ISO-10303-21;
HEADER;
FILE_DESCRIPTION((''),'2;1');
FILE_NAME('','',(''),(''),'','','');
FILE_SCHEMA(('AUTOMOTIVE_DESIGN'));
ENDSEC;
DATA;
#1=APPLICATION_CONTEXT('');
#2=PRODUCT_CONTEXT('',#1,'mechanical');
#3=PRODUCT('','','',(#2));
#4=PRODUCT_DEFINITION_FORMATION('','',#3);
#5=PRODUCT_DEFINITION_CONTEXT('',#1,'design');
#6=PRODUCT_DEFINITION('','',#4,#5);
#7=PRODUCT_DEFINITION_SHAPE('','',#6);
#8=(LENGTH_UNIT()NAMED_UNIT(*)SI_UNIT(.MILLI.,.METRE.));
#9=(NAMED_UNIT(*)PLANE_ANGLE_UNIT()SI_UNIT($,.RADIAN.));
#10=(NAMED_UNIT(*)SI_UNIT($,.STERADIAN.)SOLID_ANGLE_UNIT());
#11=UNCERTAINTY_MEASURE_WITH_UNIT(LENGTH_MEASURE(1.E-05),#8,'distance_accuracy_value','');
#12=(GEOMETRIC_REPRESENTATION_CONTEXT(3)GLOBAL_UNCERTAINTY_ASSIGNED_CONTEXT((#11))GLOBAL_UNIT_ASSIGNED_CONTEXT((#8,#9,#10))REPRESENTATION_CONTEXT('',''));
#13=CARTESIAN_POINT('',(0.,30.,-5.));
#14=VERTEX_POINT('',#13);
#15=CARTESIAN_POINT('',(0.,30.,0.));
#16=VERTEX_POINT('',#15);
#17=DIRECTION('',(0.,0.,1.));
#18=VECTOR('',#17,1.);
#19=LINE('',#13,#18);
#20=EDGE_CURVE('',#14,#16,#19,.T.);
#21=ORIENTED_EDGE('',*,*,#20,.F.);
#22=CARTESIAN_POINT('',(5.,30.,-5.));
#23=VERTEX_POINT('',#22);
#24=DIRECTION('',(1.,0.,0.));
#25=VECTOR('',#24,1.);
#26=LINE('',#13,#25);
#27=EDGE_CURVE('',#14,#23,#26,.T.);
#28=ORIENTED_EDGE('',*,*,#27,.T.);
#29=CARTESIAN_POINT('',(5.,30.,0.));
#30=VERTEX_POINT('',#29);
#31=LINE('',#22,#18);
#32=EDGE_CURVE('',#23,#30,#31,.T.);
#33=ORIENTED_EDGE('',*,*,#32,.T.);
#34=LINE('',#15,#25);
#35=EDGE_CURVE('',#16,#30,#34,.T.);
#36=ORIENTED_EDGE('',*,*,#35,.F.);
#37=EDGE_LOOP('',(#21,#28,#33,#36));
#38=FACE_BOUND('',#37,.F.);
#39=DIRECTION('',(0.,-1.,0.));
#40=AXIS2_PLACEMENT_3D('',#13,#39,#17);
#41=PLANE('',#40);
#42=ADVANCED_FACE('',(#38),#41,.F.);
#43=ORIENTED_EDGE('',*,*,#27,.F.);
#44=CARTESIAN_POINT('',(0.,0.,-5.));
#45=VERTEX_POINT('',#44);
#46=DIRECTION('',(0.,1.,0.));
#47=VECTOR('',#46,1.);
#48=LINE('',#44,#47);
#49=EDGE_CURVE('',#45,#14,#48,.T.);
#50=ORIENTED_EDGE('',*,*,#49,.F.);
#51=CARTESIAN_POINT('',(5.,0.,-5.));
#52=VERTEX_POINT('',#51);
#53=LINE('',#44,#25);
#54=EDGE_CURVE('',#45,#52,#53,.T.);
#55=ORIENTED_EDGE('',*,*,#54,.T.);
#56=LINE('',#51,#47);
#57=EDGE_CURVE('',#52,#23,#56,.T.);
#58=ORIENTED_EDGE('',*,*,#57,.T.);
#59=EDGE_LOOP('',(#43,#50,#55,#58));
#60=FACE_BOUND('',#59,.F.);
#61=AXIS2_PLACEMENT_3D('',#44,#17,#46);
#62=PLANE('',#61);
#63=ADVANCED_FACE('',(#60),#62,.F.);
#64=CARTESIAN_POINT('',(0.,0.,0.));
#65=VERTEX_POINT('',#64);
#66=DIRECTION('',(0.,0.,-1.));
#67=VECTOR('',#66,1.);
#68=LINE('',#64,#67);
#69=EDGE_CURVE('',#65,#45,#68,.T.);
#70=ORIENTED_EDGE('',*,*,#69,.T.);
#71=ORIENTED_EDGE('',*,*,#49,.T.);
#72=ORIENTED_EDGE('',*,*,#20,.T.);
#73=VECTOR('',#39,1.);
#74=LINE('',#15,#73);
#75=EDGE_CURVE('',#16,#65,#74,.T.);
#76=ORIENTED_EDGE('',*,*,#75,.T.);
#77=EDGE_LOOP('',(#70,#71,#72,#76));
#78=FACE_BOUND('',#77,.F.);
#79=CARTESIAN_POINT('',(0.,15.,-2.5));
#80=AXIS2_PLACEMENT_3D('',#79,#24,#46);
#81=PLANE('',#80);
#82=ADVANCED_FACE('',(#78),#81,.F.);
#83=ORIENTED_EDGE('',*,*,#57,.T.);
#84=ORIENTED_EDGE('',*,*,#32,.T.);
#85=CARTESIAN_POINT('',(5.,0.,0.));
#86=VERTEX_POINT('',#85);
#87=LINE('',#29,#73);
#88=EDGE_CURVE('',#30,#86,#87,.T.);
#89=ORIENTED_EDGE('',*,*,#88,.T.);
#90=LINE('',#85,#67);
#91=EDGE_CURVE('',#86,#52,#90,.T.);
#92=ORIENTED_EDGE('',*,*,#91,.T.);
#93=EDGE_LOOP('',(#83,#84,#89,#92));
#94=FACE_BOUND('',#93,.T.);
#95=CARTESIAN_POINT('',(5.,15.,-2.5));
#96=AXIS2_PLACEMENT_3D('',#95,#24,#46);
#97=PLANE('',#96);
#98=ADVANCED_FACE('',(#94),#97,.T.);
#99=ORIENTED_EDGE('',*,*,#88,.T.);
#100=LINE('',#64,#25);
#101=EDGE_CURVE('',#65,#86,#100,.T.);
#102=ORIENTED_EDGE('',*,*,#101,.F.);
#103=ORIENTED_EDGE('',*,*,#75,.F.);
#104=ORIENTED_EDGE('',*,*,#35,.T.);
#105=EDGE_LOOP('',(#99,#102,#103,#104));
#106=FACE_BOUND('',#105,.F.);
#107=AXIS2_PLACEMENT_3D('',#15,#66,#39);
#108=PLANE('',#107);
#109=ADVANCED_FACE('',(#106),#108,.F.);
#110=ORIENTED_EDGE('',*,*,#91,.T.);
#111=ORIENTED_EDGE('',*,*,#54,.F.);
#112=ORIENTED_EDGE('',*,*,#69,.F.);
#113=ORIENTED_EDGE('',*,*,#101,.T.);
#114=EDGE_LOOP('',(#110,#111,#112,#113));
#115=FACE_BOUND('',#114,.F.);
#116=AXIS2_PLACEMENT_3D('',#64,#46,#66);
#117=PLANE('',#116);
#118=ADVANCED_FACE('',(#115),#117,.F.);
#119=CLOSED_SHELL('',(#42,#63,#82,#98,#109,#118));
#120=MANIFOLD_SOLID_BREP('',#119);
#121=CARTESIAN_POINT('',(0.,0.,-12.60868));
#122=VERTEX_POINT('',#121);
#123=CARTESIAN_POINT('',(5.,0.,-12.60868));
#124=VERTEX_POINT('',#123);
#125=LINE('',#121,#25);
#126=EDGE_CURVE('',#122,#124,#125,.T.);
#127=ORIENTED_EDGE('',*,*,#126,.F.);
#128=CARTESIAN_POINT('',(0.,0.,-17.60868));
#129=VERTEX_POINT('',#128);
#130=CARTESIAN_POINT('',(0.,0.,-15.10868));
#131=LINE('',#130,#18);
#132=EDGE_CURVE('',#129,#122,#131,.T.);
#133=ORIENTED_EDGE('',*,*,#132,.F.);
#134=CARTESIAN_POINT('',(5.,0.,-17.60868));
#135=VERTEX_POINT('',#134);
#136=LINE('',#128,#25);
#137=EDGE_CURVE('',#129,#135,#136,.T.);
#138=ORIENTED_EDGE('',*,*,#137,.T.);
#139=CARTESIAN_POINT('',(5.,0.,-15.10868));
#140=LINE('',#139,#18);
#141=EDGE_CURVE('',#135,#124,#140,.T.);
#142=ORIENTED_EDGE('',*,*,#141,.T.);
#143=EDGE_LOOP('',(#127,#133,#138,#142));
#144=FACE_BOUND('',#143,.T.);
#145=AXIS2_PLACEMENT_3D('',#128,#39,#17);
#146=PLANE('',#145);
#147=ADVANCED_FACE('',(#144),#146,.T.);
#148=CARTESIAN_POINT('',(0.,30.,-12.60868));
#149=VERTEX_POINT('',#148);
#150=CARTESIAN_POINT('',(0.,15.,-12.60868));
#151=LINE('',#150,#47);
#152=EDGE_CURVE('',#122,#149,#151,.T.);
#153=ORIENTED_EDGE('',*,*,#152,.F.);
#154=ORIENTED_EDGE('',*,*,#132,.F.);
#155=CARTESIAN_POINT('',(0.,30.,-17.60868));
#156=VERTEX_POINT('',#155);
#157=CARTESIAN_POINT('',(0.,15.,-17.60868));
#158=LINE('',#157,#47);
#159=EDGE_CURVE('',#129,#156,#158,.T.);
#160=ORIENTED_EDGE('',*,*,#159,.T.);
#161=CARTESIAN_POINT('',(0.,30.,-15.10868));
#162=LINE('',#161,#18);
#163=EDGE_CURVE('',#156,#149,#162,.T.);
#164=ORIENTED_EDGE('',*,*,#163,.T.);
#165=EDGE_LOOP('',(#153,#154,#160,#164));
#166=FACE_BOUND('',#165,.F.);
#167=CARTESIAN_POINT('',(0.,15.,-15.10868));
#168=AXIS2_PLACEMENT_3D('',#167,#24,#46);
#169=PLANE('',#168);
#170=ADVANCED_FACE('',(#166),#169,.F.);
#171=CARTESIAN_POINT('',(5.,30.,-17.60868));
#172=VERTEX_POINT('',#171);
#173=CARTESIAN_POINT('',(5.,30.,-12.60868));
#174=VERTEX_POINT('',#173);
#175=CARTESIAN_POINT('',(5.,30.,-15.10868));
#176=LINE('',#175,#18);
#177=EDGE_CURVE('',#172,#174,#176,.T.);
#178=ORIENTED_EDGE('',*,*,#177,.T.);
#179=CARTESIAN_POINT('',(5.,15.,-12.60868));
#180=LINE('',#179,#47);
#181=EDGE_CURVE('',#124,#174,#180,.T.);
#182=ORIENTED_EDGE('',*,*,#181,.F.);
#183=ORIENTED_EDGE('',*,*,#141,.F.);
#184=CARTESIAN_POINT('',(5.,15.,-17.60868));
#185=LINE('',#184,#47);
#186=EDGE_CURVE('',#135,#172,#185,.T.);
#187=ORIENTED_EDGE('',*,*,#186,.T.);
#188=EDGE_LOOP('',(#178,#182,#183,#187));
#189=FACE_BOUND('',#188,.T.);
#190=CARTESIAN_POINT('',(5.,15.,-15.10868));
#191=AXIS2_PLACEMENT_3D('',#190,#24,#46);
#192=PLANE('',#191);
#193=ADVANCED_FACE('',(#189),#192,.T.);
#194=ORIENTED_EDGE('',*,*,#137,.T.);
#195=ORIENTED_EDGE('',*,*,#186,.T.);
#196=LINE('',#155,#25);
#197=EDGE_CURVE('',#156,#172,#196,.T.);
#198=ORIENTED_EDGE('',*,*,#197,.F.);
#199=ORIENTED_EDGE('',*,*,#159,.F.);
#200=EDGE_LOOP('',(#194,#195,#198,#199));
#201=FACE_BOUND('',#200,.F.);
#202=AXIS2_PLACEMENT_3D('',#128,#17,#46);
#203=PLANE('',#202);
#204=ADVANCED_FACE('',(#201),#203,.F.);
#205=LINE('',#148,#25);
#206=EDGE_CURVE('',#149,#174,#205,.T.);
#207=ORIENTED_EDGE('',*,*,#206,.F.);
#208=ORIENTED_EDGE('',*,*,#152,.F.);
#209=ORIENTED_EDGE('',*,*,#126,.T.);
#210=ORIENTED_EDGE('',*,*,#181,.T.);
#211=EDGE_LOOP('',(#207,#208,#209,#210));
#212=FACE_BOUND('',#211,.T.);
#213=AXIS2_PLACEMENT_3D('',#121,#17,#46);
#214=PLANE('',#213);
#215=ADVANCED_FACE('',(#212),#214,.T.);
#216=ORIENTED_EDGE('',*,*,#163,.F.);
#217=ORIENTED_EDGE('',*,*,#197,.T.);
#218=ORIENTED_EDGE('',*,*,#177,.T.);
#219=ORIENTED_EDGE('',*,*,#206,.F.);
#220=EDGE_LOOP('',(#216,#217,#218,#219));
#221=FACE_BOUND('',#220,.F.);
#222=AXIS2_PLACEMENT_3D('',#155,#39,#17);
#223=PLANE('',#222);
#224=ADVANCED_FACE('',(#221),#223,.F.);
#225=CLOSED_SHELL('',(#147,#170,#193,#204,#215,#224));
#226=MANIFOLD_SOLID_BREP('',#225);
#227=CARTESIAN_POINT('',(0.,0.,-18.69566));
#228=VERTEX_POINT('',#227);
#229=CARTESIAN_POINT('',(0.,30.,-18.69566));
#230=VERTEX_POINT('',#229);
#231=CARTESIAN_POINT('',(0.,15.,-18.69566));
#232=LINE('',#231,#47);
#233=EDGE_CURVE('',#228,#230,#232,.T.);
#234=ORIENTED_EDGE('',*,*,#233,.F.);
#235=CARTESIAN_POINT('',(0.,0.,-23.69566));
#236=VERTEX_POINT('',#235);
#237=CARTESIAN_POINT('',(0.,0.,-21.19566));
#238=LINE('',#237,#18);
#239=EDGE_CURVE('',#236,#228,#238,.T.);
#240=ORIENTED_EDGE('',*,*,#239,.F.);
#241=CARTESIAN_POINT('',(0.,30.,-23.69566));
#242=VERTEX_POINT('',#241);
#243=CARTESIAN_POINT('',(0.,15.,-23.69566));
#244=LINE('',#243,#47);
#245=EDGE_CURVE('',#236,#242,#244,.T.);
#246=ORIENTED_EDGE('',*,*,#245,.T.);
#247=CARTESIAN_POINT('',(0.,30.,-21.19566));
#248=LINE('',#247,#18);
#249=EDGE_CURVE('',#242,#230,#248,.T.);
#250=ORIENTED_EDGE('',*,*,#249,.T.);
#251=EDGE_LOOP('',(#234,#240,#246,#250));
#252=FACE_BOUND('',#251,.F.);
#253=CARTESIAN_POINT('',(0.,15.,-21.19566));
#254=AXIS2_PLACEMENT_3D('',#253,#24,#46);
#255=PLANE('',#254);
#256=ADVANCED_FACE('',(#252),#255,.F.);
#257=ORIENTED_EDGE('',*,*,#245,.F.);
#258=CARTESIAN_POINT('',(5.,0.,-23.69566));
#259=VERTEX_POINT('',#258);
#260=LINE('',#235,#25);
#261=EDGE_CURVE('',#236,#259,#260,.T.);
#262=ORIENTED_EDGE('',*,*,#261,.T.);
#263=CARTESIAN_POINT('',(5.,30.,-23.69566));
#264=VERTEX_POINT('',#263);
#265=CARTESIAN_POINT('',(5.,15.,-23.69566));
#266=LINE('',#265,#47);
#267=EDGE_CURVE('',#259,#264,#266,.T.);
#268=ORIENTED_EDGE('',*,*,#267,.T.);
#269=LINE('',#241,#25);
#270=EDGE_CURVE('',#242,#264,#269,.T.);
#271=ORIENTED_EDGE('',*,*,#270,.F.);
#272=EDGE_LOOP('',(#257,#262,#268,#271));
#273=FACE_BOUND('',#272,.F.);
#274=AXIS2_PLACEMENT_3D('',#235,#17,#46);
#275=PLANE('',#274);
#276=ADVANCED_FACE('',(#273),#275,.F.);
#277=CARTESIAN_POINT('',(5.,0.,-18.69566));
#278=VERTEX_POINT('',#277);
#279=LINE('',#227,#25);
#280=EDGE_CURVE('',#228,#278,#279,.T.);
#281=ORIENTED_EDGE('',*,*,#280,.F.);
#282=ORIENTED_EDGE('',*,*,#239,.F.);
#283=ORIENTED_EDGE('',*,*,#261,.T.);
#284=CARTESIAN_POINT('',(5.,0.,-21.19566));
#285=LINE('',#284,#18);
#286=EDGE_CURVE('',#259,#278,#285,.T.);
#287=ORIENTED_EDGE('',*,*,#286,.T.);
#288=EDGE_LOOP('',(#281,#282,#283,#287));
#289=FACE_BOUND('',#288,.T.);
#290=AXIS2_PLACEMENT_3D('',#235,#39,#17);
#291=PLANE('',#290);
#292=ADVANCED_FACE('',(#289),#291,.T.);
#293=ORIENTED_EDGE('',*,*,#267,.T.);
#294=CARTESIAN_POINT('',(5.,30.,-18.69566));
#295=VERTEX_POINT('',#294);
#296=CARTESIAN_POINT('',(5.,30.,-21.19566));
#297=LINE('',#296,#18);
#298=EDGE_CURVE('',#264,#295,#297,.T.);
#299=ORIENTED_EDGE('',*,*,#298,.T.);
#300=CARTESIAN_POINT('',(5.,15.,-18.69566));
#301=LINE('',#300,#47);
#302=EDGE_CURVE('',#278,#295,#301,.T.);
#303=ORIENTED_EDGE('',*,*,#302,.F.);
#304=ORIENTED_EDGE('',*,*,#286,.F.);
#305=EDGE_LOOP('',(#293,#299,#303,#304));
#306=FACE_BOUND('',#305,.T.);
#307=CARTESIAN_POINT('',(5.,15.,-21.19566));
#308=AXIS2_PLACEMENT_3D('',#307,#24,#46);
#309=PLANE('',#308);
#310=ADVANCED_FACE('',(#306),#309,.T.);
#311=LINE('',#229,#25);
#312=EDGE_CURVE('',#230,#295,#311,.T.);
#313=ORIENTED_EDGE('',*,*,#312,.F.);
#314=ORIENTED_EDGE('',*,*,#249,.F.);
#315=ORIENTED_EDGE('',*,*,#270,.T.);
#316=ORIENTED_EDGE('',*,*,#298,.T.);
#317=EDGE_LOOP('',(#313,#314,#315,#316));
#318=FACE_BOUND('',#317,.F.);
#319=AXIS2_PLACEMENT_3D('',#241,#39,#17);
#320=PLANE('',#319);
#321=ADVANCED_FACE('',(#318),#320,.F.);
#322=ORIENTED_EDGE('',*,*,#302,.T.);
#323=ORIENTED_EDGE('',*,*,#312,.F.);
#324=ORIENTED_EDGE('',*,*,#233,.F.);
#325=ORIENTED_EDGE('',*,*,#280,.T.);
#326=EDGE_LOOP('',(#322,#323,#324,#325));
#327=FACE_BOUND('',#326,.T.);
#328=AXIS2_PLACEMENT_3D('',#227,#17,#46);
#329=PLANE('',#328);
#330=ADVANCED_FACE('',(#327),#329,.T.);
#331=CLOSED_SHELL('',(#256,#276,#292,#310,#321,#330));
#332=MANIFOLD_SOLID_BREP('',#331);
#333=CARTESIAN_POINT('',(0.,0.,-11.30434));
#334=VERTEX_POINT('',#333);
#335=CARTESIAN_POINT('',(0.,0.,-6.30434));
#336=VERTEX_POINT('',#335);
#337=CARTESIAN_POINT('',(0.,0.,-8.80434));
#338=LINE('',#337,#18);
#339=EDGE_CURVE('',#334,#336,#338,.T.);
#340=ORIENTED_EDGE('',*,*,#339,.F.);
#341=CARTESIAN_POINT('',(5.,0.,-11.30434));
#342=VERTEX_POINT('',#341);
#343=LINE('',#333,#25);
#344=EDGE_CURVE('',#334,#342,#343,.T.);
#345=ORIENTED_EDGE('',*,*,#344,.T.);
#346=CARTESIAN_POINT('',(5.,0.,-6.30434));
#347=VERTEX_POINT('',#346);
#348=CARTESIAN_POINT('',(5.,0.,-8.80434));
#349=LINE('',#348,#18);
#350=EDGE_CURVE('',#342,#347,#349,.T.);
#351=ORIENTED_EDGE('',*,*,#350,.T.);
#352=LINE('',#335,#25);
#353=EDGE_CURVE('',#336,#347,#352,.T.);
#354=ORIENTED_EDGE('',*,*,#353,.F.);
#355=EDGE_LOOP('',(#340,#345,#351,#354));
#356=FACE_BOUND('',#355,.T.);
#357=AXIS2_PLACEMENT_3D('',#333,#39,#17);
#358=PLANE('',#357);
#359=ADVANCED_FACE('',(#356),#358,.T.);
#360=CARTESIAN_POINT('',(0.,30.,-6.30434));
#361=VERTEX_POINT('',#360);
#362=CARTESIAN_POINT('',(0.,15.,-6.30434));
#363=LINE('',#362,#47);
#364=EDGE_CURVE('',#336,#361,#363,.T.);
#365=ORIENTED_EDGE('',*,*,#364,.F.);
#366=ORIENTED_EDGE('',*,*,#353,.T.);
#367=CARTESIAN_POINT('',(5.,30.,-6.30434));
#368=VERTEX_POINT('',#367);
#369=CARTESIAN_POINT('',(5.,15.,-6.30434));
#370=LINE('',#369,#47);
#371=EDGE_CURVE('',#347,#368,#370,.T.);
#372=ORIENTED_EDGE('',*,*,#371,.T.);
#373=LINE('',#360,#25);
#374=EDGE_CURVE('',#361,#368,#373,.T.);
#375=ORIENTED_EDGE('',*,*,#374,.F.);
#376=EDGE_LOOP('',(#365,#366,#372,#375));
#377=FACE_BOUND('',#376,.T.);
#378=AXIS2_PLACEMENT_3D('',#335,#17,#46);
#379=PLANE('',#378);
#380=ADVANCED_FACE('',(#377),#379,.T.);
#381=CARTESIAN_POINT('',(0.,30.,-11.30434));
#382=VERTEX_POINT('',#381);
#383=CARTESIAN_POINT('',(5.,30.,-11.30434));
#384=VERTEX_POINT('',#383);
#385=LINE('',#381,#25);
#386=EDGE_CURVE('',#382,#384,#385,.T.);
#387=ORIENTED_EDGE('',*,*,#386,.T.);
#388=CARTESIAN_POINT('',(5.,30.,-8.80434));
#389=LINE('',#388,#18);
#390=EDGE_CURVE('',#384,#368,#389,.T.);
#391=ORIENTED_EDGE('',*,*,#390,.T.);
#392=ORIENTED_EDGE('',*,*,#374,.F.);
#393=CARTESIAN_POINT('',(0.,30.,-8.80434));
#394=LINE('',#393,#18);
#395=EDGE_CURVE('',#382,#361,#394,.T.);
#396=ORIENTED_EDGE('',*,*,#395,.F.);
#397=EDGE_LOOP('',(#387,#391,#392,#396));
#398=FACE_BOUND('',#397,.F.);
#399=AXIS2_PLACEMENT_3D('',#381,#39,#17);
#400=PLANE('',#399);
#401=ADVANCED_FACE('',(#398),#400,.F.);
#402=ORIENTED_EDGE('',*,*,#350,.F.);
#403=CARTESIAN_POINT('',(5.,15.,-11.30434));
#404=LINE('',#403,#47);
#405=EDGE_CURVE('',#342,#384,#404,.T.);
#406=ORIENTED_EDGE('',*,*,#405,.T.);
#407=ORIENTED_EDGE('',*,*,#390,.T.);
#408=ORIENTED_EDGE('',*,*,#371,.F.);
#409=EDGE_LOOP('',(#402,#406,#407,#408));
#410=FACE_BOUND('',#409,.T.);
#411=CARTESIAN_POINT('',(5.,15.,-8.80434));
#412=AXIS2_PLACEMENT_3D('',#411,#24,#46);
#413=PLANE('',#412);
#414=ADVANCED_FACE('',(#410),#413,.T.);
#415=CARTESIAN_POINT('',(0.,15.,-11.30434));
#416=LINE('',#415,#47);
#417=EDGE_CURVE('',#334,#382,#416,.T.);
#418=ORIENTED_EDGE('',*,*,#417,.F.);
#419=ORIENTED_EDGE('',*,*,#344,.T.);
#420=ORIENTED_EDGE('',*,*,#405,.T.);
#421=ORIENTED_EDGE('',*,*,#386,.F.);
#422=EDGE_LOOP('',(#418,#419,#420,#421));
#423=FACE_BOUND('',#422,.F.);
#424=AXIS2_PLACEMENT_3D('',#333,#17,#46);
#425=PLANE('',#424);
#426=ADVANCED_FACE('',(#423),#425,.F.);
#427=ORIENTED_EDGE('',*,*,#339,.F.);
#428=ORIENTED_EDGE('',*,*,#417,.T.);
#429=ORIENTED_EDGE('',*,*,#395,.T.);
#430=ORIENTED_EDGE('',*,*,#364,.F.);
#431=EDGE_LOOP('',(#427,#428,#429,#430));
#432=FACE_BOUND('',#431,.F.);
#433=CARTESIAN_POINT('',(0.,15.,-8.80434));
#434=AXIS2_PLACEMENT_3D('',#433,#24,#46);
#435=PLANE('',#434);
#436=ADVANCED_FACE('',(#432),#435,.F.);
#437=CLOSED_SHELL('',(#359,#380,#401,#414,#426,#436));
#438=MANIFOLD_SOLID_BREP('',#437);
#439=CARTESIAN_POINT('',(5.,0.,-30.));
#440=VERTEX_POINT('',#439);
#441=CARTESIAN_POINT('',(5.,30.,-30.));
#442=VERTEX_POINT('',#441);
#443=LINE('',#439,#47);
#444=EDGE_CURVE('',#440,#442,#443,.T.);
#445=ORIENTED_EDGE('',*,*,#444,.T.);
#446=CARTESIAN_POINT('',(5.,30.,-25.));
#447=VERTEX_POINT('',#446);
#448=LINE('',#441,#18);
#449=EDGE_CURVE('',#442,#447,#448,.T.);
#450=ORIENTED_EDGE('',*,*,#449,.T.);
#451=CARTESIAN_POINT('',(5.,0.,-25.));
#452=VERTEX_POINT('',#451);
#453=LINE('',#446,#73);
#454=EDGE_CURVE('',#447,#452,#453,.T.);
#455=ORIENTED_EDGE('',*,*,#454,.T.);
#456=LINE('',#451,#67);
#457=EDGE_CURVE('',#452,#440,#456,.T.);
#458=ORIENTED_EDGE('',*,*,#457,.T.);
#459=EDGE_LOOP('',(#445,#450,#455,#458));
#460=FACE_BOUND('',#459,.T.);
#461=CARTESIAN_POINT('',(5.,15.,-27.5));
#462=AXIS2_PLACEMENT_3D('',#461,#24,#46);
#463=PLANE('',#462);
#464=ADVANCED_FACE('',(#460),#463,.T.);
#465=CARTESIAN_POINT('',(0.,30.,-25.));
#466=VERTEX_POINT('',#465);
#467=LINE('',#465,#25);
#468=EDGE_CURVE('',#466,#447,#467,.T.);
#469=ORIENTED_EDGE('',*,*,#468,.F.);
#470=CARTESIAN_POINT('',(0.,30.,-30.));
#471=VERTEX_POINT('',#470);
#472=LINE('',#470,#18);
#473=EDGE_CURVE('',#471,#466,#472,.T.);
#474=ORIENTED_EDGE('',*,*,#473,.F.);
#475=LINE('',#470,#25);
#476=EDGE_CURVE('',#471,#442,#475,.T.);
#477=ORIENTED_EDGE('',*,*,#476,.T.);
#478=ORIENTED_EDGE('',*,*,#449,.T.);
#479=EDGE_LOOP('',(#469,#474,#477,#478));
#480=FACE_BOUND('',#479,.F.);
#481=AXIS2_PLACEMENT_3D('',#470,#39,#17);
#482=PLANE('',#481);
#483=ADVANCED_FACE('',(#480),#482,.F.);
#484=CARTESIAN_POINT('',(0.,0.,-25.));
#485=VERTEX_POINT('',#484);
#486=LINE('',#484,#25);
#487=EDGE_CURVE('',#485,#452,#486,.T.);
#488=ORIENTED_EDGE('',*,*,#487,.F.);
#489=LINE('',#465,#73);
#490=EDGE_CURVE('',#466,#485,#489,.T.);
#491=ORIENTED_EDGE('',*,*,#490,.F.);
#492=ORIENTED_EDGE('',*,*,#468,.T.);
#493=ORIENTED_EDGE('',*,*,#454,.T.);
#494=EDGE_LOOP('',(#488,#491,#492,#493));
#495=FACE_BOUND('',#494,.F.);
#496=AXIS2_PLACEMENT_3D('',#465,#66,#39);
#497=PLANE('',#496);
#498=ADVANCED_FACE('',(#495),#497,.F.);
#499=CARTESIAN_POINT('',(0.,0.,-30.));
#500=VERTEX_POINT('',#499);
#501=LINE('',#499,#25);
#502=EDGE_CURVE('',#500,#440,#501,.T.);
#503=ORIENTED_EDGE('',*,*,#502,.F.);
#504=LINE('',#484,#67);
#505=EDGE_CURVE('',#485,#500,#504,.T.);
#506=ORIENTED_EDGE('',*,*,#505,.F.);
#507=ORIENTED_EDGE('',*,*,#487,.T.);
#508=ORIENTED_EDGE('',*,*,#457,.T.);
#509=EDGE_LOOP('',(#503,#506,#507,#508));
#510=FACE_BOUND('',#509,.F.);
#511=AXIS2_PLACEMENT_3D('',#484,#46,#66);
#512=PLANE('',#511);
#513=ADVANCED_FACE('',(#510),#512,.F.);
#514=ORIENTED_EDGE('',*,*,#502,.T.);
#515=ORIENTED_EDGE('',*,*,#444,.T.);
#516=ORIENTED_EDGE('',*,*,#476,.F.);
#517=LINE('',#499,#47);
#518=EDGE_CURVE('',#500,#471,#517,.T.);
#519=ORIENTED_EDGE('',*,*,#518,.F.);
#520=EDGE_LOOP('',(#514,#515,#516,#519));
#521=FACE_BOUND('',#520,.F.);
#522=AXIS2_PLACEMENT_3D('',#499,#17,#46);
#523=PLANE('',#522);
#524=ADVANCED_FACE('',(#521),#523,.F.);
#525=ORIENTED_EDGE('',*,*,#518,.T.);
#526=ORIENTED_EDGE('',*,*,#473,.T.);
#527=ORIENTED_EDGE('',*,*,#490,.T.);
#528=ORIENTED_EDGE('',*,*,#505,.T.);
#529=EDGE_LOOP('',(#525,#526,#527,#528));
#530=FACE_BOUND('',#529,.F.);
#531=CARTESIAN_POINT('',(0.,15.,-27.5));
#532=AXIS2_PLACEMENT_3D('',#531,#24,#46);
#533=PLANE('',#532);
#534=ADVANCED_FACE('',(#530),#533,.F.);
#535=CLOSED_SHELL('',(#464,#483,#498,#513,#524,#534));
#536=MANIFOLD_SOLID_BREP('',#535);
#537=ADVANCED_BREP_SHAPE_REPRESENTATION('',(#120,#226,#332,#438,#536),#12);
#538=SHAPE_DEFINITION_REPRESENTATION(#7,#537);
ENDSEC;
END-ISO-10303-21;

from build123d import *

# Parameters (mm, degrees)
F1_DEPTH = 5
F0_W     = 30
F0_H     = 5.0000004371
F0_H_2   = 5


# Not quite as in the source:
# - ends of sketch curves that miss each other by under 0.0002 mm in the source are joined


with BuildPart() as f1:
    # F0 (on Right) → F1 (new body)
    with BuildSketch(Plane.YZ):
        Polygon((0, -25.0000003725), (0, -30), (12, -30), (12.39, -30), (12.4011761725, -30), (17.61, -30), (30, -30), (30, -25.0000003725), align=None)
    extrude(amount=F1_DEPTH)


with BuildPart() as f1b:
    # F0 (on Right) → F1, piece 2 (new body)
    with BuildSketch(Plane.YZ):
        with Locations((15, -21.195660154)):
            Rectangle(F0_W, F0_H)
    extrude(amount=F1_DEPTH)


with BuildPart() as f1c:
    # F0 (on Right) → F1, piece 3 (new body)
    with BuildSketch(Plane.YZ):
        with Locations((15, -15.10868)):
            Rectangle(F0_W, F0_H_2)
    extrude(amount=F1_DEPTH)


with BuildPart() as f1d:
    # F0 (on Right) → F1, piece 4 (new body)
    with BuildSketch(Plane.YZ):
        with Locations((15, -8.80434)):
            Rectangle(F0_W, F0_H_2)
    extrude(amount=F1_DEPTH)


with BuildPart() as f1e:
    # F0 (on Right) → F1, piece 5 (new body)
    with BuildSketch(Plane.YZ):
        Polygon((6.5217, 0), (0, 0), (0, -5), (30, -5), (30, 0), (23.4783, 0), align=None)
    extrude(amount=F1_DEPTH)


solid = Compound([f1.part, f1b.part, f1c.part, f1d.part, f1e.part])
